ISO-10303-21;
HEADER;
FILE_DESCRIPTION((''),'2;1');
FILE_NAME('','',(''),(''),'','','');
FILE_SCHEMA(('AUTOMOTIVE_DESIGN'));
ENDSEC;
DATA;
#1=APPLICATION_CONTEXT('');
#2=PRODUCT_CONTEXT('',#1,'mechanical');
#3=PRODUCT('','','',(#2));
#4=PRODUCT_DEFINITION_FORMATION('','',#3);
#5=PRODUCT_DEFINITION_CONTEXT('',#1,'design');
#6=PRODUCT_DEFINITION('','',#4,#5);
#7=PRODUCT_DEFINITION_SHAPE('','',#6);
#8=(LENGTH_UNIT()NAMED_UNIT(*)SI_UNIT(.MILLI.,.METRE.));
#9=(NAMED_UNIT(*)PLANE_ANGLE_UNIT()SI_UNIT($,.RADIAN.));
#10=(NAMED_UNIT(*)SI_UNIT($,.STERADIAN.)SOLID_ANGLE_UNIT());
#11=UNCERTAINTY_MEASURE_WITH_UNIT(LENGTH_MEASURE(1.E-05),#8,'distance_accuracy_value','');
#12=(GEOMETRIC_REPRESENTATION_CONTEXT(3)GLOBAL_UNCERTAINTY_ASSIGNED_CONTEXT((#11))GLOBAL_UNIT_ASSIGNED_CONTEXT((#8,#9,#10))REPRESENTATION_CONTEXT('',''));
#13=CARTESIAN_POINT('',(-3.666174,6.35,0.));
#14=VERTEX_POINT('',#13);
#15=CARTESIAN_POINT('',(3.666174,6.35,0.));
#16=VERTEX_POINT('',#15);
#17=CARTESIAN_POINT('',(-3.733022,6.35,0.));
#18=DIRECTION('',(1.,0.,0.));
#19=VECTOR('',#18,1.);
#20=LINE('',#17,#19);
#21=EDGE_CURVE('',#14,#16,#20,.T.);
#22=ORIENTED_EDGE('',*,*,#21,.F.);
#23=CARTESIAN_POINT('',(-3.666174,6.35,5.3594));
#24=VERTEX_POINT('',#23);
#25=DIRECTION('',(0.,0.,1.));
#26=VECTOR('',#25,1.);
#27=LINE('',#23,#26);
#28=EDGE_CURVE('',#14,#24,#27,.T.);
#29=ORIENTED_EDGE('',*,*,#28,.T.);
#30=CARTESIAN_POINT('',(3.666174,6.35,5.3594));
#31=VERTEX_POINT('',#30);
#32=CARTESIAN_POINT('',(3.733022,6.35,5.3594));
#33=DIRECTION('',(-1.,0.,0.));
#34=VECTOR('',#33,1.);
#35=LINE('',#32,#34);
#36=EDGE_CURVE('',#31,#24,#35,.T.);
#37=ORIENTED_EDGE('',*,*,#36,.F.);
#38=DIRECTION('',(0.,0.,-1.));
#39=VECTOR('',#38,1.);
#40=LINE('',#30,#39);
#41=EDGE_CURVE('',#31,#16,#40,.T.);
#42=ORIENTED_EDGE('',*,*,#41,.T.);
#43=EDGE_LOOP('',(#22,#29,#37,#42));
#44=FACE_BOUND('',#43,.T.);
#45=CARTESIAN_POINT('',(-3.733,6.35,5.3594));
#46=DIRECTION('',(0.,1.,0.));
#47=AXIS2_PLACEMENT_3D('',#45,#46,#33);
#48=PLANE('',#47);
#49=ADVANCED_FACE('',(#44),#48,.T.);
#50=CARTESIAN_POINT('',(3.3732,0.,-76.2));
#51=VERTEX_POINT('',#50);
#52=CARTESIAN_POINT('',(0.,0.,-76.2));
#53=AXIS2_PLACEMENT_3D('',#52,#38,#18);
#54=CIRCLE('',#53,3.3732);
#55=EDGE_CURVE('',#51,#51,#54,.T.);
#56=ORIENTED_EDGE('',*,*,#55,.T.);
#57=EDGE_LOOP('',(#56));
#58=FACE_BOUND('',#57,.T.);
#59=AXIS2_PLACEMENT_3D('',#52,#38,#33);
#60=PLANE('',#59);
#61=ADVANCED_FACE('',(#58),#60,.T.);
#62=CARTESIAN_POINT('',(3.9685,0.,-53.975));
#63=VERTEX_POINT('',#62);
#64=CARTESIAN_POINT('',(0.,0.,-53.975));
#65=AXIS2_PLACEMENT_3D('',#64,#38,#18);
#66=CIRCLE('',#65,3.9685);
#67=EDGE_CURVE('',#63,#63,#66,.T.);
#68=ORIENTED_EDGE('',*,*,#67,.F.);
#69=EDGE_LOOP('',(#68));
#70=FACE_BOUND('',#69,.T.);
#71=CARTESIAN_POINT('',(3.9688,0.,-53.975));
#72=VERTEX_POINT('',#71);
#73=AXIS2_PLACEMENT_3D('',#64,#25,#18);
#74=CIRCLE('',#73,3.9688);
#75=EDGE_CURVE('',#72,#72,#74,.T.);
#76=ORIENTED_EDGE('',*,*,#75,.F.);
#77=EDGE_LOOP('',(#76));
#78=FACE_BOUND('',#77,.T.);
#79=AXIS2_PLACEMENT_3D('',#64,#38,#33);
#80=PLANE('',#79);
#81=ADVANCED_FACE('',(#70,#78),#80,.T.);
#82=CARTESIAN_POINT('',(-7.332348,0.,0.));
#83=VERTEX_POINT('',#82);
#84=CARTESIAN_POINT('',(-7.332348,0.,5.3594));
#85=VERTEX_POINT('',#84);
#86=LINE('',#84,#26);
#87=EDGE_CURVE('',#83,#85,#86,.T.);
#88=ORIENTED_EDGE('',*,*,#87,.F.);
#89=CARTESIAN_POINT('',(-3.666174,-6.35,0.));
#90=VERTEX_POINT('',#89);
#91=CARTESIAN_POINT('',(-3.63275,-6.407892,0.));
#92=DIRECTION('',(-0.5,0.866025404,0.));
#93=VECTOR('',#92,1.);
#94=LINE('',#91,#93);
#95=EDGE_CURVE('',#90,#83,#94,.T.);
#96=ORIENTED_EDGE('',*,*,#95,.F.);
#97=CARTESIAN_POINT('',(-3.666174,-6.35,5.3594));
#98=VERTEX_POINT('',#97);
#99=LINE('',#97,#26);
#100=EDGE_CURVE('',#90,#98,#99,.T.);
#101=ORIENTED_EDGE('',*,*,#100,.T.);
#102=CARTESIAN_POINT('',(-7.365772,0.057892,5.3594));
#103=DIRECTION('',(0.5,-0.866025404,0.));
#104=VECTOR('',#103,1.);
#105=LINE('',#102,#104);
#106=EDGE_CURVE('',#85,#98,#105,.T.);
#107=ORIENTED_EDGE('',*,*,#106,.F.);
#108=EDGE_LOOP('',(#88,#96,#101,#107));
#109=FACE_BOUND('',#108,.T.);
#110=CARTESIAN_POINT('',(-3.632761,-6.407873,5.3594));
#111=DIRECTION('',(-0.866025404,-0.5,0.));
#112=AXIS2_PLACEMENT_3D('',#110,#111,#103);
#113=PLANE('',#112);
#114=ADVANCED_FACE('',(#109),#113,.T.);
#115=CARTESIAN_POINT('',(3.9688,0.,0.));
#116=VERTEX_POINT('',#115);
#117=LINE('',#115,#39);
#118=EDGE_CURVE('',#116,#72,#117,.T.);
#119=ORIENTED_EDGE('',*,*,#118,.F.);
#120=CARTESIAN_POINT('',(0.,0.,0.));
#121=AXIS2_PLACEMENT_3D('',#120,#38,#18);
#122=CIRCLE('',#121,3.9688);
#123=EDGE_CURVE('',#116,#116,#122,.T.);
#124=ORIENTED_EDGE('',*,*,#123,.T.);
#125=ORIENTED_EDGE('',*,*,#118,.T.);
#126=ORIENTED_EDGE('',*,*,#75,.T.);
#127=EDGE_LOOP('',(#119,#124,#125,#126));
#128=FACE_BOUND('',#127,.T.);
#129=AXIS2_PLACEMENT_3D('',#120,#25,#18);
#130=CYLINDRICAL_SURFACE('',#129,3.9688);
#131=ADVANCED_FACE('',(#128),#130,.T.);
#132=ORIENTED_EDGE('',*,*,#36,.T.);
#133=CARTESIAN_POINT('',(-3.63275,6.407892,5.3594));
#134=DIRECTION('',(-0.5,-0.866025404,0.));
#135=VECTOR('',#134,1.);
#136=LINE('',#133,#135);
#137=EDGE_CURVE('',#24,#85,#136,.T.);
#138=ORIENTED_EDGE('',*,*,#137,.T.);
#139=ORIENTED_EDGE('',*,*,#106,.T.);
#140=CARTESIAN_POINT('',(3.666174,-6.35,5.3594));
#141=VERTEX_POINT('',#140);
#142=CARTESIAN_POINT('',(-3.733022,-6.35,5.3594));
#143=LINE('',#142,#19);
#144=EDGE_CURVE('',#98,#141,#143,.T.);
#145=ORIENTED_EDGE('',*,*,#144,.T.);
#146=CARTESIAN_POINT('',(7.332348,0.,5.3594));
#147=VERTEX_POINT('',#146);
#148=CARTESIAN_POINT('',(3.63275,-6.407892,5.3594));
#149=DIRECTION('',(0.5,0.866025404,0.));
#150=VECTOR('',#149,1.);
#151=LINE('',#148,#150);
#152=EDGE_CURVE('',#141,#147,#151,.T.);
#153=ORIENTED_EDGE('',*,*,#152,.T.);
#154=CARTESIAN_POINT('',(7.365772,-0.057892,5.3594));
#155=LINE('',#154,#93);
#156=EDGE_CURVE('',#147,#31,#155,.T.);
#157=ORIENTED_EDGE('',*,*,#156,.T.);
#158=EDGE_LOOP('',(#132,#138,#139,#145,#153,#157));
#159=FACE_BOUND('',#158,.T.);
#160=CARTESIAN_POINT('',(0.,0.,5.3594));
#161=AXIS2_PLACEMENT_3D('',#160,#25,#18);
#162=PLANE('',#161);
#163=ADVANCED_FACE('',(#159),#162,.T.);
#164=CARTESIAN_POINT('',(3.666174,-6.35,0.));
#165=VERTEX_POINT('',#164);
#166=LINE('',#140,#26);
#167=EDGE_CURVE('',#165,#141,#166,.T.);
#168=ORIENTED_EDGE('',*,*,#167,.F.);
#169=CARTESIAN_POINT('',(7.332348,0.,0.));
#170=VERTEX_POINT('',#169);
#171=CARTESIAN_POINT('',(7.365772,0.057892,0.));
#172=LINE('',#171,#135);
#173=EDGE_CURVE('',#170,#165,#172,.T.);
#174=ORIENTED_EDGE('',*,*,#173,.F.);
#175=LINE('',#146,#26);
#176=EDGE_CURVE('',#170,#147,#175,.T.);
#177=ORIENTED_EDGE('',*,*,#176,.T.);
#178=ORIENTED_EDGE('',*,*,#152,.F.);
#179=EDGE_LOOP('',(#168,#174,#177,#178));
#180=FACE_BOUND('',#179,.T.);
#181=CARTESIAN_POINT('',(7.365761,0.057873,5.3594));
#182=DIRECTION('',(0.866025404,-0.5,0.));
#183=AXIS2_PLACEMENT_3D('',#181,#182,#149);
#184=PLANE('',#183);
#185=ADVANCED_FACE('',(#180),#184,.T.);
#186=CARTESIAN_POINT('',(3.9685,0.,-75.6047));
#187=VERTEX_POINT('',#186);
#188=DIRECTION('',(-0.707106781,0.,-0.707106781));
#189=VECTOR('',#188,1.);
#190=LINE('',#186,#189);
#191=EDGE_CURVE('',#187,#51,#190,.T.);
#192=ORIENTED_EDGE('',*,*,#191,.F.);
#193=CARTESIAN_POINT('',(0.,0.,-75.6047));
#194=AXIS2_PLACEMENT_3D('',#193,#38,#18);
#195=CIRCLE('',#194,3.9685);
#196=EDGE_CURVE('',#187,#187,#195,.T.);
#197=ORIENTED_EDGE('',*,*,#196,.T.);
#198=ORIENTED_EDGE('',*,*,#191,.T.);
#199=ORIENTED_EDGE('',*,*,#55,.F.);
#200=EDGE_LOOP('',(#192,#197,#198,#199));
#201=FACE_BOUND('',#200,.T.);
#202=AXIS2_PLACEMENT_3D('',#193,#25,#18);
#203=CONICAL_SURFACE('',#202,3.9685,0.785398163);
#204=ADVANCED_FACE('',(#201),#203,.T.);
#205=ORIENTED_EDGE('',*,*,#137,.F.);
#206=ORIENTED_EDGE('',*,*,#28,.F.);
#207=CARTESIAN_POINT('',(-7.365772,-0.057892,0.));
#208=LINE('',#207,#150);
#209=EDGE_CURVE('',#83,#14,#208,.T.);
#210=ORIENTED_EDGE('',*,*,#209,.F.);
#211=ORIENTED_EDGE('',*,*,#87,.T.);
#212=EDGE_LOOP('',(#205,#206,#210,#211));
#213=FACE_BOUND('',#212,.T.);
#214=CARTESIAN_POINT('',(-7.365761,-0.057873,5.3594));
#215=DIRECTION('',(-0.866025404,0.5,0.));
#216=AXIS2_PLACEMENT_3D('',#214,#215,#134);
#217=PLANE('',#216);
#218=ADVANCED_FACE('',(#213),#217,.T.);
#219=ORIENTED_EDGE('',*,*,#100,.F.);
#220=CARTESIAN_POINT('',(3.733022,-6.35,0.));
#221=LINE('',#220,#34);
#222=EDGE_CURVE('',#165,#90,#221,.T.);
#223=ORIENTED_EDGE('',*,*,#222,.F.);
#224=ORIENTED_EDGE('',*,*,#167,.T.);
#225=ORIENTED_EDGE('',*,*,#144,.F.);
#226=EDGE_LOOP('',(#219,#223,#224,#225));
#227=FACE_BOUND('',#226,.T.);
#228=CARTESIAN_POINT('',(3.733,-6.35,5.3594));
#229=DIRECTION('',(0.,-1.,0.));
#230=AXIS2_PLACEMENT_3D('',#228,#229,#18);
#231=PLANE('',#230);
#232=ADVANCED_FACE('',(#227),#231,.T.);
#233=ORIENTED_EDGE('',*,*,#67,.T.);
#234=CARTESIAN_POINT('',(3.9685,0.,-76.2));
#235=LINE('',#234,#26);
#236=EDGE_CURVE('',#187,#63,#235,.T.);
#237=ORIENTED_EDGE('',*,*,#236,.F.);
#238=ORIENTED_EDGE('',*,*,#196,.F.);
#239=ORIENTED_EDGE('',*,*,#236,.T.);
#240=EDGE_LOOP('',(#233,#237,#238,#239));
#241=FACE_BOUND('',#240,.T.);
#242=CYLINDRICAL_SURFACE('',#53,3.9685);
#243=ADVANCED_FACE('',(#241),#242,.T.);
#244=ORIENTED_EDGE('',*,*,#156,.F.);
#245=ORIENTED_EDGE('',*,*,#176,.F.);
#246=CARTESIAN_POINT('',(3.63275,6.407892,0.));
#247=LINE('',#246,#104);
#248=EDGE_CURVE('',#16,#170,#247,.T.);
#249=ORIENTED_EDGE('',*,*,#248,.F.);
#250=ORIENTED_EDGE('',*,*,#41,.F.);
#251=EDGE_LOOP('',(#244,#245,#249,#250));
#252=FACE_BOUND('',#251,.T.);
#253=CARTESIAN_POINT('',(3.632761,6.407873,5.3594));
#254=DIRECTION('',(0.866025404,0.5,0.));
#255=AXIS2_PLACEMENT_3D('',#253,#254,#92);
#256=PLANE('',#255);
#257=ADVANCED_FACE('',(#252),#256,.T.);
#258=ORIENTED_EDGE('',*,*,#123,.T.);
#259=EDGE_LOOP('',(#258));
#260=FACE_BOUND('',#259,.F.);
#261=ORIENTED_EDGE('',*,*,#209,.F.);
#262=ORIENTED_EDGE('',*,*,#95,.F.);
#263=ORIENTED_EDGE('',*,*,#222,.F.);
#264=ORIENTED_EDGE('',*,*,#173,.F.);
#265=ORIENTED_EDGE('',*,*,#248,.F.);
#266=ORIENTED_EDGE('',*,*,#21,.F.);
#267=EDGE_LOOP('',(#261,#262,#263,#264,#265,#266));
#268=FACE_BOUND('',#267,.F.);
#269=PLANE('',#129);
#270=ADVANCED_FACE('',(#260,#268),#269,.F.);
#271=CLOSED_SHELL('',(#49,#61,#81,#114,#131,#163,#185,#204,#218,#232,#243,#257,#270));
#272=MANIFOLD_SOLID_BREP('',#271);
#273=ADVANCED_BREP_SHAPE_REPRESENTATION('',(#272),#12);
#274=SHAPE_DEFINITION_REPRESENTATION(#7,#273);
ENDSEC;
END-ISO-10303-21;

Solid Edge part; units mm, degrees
sketch "Sketch1" plane through (0, 0, 0) normal (0, 0, 1) x (1, 0, 0)
  circle A0 centre (0, 0) radius 7.366
  dimension "D1" = 14.732
extrude "Protrusion1" add sketch "Sketch1" along normal blind 5.3594
sketch "Sketch2" plane through (0, 0, 0) normal (0, 0, -1) x (1, 0, 0)
  circle A0 centre (0, 0) radius 3.9688
extrude "Protrusion2" add sketch "Sketch2" along normal blind 76.2
sketch "Sketch3" plane through (0, 0, -76.2) normal (0, 0, -1) x (1, 0, 0)
  circle A0 centre (0, 0) radius 3.9685
extrude "Cutout1" cut sketch "Sketch3" against normal blind 22.225 flip side to cut
chamfer "Chamfer_1" distance 0.5953 angle 45 1 edges at (-3.9685, 0, -76.2)
sketch "Sketch4" plane through (0, 0, 5.3594) normal (0, 0, 1) x (1, 0, 0)
  line L0 (-3.733, 6.35) -> (3.733, 6.35)
  dimension "D1" = 12.7
extrude "Cutout2" cut sketch "Sketch4" against normal up to next material side at (0, 6.4, 5.3594)
pattern_circular "Pattern1" count 6 over 360 about axis through (0, 0, 5.3594) along (0, 0, 1) of "Cutout2"
properties part number "24102220"
